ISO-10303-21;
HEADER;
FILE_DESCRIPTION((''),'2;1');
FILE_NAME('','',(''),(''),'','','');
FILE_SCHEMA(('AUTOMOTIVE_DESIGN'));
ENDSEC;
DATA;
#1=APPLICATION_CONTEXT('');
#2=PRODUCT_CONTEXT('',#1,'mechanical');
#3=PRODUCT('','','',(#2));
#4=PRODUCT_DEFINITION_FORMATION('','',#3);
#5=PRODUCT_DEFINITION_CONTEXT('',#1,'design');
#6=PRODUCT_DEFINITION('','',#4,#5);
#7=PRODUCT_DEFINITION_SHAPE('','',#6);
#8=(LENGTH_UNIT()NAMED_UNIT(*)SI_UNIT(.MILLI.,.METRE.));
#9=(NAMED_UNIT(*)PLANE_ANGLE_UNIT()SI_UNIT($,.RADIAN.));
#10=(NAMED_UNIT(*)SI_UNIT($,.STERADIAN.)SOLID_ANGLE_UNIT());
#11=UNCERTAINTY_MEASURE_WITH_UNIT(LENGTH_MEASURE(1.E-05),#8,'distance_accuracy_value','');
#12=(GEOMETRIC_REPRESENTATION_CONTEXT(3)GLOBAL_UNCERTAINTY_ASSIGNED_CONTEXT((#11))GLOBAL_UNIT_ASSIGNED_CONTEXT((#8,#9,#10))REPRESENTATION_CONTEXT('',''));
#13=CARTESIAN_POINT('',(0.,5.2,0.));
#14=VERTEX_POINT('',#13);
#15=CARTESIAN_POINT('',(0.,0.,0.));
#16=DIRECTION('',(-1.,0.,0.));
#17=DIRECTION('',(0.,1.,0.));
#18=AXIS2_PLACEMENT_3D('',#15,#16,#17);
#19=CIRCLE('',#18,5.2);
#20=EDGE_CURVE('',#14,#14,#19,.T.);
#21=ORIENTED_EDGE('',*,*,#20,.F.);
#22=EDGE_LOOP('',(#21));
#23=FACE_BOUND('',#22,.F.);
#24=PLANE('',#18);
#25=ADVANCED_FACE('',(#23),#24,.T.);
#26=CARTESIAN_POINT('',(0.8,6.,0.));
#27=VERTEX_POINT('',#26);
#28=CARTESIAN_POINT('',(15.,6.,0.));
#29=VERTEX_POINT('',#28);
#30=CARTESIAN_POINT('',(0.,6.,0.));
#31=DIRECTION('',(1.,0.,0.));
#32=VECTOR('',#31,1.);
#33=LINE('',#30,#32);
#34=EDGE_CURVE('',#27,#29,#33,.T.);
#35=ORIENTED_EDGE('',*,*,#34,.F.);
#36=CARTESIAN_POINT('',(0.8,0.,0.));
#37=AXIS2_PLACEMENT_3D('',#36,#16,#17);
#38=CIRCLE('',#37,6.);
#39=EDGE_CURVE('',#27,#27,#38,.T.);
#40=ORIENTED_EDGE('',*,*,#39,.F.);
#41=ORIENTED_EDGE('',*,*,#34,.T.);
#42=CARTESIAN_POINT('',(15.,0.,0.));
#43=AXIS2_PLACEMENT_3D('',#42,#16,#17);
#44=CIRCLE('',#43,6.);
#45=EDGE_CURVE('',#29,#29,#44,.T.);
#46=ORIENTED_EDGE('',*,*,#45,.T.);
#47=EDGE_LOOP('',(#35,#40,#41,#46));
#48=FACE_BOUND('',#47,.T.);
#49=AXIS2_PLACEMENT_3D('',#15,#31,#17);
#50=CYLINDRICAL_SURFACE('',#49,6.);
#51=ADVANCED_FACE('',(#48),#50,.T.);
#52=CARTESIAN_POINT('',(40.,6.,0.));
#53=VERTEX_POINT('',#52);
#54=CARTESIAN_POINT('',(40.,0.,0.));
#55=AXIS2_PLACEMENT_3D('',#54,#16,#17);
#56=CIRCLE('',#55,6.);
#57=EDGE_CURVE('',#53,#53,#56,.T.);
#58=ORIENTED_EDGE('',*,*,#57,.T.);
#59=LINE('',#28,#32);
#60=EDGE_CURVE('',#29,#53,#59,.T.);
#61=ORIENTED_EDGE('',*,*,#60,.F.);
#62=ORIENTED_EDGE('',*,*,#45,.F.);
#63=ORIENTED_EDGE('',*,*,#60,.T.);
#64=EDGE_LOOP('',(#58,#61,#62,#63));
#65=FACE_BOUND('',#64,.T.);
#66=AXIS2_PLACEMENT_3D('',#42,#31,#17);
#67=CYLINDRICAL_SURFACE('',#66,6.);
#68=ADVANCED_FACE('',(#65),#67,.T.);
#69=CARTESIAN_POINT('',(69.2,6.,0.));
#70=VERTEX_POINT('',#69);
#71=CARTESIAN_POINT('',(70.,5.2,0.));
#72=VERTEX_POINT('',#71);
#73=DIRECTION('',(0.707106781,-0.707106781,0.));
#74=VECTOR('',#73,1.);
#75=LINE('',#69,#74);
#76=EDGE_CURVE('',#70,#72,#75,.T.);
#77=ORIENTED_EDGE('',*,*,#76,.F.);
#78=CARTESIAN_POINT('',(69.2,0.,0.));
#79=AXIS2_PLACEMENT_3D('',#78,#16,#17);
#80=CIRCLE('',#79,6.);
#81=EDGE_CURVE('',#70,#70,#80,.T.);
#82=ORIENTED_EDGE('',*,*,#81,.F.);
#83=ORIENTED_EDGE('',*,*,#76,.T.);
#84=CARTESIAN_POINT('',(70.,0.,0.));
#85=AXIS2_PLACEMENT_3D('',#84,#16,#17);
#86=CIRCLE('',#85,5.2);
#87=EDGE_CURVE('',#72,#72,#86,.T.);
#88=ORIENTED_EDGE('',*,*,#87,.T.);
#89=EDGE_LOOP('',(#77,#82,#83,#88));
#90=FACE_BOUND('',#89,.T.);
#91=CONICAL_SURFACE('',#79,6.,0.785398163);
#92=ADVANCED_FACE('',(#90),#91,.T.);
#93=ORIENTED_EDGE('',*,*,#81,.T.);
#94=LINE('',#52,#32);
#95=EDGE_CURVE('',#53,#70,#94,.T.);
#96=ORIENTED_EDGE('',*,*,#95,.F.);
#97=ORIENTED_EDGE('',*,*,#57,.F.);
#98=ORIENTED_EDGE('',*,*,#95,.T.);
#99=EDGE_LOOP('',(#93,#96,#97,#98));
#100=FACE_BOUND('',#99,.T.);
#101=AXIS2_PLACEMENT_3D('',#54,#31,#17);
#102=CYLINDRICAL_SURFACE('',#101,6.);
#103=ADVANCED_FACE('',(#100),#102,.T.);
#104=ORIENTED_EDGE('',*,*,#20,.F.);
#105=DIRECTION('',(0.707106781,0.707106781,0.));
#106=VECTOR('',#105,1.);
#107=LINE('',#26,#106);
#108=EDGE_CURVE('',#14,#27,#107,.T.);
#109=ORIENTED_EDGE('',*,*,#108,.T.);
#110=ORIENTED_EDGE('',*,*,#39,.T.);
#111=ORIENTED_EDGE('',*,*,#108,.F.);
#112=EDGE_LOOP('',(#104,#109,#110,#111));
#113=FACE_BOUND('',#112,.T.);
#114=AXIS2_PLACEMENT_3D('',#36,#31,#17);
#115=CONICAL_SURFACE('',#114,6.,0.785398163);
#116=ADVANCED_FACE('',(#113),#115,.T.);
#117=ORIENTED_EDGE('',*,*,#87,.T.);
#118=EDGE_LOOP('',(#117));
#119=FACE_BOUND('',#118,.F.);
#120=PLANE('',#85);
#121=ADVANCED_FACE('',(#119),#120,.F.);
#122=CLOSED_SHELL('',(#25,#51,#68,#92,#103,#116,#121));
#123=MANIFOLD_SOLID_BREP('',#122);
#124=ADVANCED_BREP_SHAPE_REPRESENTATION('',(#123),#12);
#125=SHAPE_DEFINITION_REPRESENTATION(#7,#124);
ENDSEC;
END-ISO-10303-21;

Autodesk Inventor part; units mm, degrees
ref_plane "YZ Plane" through (0, 0, 0) normal (1, 0, 0) x (0, 1, 0)
ref_plane "XZ Plane" through (0, 0, 0) normal (0, 1, 0) x (-1, 0, 0)
sketch "Sketch1" plane through (0, 0, 0) normal (0, 0, 1) x (1, 0, 0)
  line L0 (0, 0) -> (0, 6)
  line L1 (0, 6) -> (15, 6)
  line L2 (15, 6) -> (15, 6)
  line L3 (15, 6) -> (40, 6)
  line L4 (40, 6) -> (40, 6)
  line L5 (40, 6) -> (70, 6)
  line L6 (70, 6) -> (70, 0)
  line L7 (70, 0) -> (0, 0)
  dimension "d1" = 12
  dimension "d3" = 12
  dimension "d4" = 15
  dimension "d5" = 55
  dimension "d6" = 30
revolve "Revolution1" add sketch "Sketch1" angle 360 about axis through (70, 0, 0) along (-1, 0, 0)
thread "Thread1" size "M12x1.75" class "6g" standard "ISO Metric profile" length 15
thread "Thread2" size "M12x1.75" class "6g" standard "ISO Metric profile" length 30
chamfer "Chamfer1" distance 0.8 angle 45 2 edges at (70, -6, 0) (0, -6, 0)
ref_plane "Work Plane1" through (15, 0, 0) normal (1, 0, 0) x (0, 1, 0)
sketch "Sketch2" plane through (15, 0, 0) normal (1, 0, 0) x (0, 1, 0)
  circle A0 centre (0, 0) radius 6
  point P0 (0, 0)
  dimension "d29" = 12
boundary_patch "Boundary Patch1"
equation "\"d8\" = d4"
equation "\"d23\" = b"
equation "\"d25\" = chamfer"
equation "\"d1\" = d"
equation "\"d3\" = d1_"
equation "\"d4\" = b1"
equation "\"d5\" = L"
equation "\"d6\" = b"
equation "\"d29\" = d"
equation "\"chamfer\" = 0.8"
equation "\"d\" = 12"
equation "\"d1_\" = 12"
equation "\"b1\" = 15"
equation "\"L\" = 55"
equation "\"b\" = 30"
equation "\"d28\" = -b1"
equation "\"Grip_Length\" = 25"
properties part number "Stud M12-6g×55 GOST 22034-76" material "Steel, Mild"
